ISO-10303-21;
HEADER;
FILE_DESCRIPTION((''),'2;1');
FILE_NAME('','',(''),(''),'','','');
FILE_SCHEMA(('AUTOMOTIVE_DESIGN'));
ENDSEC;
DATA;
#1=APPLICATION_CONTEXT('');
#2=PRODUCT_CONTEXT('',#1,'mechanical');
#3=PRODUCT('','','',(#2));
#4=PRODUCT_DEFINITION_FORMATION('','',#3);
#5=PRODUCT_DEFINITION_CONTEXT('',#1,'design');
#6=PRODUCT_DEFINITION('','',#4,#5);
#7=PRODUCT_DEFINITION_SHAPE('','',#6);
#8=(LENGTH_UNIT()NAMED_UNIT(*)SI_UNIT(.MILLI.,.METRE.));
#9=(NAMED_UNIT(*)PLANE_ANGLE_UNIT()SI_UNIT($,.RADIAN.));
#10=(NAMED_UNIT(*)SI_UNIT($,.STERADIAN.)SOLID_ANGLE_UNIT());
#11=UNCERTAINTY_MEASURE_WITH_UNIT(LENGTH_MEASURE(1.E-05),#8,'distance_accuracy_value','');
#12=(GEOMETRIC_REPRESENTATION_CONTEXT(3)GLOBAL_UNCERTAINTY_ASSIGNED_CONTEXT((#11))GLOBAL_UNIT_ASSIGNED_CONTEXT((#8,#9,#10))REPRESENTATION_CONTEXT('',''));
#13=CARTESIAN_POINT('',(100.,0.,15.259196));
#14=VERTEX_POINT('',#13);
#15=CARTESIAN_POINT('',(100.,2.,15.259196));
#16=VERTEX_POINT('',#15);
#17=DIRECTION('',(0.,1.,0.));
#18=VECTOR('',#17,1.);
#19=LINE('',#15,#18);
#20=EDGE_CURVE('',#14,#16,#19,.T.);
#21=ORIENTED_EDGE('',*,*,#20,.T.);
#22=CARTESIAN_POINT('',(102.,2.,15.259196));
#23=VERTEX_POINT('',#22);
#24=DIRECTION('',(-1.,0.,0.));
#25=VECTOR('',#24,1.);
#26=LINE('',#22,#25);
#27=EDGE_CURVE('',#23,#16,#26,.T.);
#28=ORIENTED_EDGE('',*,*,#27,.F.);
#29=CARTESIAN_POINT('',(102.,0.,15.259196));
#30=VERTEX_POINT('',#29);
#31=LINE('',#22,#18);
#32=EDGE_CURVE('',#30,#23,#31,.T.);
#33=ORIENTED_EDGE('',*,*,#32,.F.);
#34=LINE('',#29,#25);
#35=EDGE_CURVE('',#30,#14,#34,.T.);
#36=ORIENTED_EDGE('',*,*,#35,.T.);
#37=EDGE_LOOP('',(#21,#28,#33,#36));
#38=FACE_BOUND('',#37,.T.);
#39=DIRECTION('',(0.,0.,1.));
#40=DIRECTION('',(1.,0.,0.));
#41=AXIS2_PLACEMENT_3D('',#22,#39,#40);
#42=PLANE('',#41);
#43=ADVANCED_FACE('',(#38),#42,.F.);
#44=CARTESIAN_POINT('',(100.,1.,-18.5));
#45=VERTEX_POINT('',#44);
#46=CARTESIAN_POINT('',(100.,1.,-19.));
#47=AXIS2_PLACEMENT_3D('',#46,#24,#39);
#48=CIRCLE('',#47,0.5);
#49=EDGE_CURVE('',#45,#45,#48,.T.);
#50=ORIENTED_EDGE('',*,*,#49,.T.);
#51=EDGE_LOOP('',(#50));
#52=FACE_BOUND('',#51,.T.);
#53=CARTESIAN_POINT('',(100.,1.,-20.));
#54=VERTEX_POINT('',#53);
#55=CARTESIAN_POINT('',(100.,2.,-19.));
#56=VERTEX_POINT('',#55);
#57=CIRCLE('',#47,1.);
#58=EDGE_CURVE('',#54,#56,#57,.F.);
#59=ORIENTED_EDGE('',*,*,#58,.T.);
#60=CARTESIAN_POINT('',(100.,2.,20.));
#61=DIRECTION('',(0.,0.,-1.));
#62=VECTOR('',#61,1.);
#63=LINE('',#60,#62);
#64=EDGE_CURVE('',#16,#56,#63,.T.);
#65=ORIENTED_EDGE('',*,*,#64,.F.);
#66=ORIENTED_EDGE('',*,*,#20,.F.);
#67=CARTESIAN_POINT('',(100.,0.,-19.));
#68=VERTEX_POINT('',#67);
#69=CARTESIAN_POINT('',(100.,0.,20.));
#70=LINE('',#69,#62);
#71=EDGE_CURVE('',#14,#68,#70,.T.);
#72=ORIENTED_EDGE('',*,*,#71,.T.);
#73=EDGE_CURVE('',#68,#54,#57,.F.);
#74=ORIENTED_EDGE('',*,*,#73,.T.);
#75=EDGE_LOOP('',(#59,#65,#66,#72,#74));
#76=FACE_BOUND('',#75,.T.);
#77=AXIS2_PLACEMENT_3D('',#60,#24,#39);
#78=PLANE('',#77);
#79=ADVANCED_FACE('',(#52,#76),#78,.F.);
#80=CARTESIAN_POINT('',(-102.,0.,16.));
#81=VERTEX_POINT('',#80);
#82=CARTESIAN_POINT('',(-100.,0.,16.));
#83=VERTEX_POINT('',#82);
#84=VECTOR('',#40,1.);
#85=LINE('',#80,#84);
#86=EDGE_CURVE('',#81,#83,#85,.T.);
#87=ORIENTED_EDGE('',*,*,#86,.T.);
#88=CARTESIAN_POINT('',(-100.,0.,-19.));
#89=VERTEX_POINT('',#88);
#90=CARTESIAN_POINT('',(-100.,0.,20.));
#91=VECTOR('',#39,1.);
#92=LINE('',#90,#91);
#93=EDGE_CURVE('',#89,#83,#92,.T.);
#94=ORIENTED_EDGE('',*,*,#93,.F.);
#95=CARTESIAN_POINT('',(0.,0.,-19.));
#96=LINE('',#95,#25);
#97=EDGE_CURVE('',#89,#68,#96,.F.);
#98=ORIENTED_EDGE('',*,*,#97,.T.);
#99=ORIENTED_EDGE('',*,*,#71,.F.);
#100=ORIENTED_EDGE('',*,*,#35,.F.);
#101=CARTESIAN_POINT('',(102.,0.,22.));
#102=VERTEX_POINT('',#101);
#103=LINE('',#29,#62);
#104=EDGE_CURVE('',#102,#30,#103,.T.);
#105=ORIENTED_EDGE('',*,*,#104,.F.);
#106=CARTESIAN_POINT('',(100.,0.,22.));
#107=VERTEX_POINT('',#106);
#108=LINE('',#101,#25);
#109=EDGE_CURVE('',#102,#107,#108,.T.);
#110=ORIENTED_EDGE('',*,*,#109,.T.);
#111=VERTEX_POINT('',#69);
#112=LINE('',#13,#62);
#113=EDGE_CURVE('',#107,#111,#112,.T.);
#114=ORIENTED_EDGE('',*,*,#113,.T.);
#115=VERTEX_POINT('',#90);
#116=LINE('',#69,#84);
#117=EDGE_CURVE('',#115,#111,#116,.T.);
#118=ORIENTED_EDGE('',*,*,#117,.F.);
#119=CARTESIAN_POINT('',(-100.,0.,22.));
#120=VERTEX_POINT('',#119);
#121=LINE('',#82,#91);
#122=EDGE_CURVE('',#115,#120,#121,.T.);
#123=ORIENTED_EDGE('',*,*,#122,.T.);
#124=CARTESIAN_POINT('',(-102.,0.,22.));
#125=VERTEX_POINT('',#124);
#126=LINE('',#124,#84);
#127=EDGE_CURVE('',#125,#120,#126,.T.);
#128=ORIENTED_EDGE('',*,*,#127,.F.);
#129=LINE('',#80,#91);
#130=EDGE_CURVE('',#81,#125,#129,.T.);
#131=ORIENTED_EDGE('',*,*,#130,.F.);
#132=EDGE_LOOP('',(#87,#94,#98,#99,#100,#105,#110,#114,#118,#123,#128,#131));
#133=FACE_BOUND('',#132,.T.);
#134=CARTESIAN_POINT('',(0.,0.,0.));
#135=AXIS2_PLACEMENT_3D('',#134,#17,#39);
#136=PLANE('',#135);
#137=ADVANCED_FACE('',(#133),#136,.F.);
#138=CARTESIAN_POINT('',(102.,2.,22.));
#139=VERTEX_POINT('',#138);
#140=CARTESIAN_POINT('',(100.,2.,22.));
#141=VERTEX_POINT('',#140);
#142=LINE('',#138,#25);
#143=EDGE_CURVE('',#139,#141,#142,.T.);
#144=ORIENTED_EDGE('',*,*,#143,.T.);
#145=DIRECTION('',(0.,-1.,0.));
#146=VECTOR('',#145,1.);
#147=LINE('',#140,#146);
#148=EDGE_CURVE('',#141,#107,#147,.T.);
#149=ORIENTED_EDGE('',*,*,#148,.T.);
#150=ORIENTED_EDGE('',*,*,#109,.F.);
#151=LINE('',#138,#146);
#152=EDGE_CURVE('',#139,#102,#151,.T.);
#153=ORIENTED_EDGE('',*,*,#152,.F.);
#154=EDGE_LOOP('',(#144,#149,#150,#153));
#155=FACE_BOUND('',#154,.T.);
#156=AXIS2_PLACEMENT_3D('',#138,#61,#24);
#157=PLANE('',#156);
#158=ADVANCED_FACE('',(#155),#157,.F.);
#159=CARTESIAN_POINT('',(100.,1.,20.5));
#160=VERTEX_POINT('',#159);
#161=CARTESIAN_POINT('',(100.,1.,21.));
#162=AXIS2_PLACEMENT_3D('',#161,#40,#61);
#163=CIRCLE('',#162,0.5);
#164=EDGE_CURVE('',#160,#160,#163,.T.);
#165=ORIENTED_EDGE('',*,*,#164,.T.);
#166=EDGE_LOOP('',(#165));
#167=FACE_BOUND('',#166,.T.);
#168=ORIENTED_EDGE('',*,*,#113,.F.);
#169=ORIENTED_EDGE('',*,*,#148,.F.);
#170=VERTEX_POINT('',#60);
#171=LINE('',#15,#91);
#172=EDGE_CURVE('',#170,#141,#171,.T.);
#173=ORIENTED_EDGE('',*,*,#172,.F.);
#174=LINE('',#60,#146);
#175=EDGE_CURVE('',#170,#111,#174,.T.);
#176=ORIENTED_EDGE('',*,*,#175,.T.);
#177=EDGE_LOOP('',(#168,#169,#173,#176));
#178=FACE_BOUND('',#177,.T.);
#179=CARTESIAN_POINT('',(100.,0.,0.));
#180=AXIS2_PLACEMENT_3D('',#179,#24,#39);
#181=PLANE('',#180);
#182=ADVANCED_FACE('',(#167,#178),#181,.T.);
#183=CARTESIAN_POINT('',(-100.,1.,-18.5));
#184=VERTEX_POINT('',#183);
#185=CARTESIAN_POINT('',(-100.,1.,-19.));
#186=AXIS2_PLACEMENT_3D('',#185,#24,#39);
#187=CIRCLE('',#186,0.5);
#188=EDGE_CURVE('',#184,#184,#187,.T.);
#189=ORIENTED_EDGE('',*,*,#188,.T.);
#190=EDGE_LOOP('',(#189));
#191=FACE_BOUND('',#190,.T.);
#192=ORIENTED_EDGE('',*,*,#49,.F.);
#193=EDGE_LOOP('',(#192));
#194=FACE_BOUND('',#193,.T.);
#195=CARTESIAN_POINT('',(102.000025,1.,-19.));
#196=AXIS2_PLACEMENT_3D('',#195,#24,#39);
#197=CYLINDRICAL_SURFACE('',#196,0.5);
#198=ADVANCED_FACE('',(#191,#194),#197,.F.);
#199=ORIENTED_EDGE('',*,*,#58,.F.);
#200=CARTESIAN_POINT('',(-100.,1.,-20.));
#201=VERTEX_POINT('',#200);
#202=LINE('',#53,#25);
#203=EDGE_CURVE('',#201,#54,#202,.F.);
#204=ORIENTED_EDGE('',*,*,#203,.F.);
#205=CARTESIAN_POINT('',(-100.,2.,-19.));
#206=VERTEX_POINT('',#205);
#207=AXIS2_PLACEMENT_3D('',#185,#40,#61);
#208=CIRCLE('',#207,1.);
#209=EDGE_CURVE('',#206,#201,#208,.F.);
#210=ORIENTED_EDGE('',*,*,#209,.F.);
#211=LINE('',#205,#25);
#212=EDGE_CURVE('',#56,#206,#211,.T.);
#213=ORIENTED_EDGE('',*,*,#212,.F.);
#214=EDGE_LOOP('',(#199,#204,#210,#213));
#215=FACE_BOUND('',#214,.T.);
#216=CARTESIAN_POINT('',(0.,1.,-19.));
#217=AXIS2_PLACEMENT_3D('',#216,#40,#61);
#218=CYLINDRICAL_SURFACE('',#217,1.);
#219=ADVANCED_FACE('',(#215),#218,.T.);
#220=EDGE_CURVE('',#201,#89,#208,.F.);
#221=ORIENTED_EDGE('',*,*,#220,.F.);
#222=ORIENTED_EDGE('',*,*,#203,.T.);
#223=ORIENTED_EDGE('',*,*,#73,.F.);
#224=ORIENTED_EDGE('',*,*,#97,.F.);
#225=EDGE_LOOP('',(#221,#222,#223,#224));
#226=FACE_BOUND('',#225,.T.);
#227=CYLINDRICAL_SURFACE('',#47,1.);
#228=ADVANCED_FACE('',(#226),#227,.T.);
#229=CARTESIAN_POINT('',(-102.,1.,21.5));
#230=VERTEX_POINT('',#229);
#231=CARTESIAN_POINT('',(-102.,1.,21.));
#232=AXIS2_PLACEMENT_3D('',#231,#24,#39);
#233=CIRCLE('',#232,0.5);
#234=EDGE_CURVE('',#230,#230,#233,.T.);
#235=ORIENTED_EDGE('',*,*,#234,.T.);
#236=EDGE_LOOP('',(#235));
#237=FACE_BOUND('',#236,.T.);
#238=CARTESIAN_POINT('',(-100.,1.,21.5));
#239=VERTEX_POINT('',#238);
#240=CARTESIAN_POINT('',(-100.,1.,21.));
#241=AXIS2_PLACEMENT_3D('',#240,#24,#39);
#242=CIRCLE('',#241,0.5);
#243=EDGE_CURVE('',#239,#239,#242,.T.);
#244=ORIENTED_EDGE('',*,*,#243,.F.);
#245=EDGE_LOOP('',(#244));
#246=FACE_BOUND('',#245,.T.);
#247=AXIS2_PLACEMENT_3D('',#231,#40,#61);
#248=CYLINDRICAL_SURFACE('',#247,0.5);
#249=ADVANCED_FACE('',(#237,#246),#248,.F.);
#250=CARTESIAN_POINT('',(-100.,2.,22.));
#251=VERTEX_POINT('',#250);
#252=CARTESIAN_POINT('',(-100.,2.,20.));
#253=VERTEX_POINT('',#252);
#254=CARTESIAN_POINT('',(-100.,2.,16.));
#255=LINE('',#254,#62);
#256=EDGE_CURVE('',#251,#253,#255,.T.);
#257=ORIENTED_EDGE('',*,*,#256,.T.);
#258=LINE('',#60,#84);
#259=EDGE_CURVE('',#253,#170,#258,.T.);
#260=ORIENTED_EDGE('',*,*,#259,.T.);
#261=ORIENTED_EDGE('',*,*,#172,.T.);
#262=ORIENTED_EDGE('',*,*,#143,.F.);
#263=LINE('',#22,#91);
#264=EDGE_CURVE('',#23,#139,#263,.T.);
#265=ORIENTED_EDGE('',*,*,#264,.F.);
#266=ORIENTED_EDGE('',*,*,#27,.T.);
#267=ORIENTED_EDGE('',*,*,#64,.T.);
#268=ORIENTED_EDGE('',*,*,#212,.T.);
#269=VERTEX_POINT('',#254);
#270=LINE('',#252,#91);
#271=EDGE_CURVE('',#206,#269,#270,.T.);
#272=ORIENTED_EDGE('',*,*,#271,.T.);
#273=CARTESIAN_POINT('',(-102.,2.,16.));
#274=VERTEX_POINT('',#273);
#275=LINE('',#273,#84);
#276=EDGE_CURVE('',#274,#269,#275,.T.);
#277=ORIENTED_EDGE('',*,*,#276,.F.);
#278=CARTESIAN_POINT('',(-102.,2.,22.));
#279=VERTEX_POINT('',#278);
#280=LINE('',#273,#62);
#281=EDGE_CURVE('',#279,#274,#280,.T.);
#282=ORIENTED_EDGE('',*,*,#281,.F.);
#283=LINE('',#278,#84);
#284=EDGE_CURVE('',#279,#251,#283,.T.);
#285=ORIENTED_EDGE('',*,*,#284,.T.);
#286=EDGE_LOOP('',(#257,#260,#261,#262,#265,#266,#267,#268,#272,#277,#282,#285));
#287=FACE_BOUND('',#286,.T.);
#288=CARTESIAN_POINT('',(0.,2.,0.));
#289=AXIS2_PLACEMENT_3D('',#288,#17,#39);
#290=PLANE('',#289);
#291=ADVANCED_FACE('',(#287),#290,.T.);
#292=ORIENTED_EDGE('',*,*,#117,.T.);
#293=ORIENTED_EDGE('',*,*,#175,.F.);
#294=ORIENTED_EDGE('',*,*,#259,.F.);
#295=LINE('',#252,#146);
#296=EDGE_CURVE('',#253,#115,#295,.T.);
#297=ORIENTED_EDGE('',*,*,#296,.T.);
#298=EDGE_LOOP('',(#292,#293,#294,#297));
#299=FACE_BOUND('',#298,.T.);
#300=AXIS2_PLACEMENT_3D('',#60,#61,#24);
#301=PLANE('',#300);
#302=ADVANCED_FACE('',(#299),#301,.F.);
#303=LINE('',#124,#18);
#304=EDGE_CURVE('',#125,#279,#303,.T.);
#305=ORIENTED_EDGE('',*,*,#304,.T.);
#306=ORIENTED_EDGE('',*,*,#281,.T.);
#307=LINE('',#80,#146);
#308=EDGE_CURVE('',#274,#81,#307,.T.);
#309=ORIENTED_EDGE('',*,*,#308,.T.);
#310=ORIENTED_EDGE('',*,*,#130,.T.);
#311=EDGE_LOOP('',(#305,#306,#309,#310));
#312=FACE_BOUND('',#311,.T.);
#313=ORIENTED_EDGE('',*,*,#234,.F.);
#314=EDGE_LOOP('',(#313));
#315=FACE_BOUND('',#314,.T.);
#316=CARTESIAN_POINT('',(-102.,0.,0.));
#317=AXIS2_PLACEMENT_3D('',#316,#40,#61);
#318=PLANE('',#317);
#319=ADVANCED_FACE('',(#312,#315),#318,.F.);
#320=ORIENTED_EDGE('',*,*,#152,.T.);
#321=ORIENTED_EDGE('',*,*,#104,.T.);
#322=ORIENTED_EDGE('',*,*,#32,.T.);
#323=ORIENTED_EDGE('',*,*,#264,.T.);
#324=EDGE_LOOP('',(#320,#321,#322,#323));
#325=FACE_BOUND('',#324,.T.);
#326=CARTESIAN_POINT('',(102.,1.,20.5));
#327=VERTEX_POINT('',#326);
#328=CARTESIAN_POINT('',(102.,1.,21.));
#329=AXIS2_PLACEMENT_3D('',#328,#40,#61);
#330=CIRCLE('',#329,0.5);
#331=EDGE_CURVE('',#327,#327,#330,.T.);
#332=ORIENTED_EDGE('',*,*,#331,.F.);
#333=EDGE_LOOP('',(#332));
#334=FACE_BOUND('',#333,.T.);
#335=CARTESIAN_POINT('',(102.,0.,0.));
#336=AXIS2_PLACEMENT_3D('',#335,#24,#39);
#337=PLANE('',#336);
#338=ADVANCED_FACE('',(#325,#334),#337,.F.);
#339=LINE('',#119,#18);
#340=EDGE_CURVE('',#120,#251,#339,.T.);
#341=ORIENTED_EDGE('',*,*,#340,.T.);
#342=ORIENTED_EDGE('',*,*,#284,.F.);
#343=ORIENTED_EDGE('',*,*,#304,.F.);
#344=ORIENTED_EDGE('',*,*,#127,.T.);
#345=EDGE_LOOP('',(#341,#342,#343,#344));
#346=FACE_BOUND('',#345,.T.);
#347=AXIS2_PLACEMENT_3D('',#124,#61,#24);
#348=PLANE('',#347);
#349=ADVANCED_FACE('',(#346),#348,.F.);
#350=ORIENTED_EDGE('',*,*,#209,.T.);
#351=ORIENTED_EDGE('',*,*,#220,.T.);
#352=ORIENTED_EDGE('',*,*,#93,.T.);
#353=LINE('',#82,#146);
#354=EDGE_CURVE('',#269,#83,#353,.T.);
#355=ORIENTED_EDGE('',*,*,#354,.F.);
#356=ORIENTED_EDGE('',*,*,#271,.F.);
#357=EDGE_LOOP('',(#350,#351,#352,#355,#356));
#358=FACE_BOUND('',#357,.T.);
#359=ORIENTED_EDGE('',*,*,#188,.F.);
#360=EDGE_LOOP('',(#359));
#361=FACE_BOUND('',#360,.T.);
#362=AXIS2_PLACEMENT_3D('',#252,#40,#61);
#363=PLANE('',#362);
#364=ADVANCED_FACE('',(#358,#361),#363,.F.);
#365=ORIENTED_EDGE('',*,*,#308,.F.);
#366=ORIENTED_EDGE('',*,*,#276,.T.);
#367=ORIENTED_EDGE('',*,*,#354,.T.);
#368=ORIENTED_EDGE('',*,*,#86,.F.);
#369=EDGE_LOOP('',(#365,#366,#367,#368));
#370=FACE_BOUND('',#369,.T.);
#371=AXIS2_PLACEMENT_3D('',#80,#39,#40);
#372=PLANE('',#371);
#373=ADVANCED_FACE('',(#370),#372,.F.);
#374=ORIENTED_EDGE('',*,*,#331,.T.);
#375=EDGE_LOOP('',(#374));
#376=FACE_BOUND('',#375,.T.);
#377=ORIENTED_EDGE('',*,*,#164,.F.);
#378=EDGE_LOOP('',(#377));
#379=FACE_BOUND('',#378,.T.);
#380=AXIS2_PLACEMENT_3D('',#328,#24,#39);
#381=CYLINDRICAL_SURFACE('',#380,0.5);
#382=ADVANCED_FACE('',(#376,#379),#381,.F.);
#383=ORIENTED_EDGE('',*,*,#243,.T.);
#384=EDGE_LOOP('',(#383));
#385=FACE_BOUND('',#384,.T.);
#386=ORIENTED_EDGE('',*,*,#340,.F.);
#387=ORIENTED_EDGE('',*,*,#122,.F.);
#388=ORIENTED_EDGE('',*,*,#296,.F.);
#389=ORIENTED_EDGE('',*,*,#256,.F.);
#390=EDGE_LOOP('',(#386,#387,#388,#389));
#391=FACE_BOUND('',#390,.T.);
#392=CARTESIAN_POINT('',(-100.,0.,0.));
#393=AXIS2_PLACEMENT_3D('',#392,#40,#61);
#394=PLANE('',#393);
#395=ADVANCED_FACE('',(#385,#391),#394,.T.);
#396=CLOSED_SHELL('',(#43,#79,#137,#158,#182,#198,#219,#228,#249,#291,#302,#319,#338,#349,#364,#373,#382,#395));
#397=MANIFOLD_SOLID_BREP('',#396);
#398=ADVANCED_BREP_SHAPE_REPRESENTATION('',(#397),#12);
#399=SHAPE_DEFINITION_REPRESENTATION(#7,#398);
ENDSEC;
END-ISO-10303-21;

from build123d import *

# Parameters (mm, degrees)
SKETCH1_W           = 200
SKETCH1_H           = 40
BOSS_EXTRUDE1_DEPTH = 2
SKETCH2_W           = 6.740804159
SKETCH2_H           = 2
SKETCH2_R           = 0.5
BOSS_EXTRUDE2_DEPTH = 2
BOSS_EXTRUDE3_START = 2
SKETCH3_W           = 6
SKETCH3_H           = 2
SKETCH3_R           = 0.5
BOSS_EXTRUDE3_DEPTH = 2
SKETCH4_R           = 0.5
CUT_EXTRUDE1_DEPTH  = 204.204330663
FILLET2_R           = 1


with BuildPart() as part:
    # Sketch1 → Boss-Extrude1 (new body)
    with BuildSketch(Plane(origin=(0, 0, 0), x_dir=(1, 0, 0), z_dir=(0, 1, 0))):
        Rectangle(SKETCH1_W, SKETCH1_H)
    extrude(amount=BOSS_EXTRUDE1_DEPTH)

    # Sketch2 → Boss-Extrude2 (add)
    with BuildSketch(Plane(origin=(100, 0, 0), x_dir=(0, 0, -1), z_dir=(1, 0, 0))):
        with Locations((-18.629597921, 1)):
            Rectangle(SKETCH2_W, SKETCH2_H)
        with Locations((-21, 1)):
            Circle(SKETCH2_R, mode=Mode.SUBTRACT)
    extrude(amount=BOSS_EXTRUDE2_DEPTH)

    # Sketch3 → Boss-Extrude3 (add)
    with BuildSketch(Plane.ZY.offset(100).offset(BOSS_EXTRUDE3_START)):
        with Locations((19, 1)):
            Rectangle(SKETCH3_W, SKETCH3_H)
        with Locations(Location((21, 1, 0), (0, 0, 180))):
            Circle(SKETCH3_R, mode=Mode.SUBTRACT)
    extrude(amount=-BOSS_EXTRUDE3_DEPTH)

    # Sketch4 → Cut-Extrude1 (cut, through all)
    with BuildSketch(Plane.ZY.offset(100)):
        with Locations((-19, 1)):
            Circle(SKETCH4_R)
    extrude(amount=-CUT_EXTRUDE1_DEPTH, mode=Mode.SUBTRACT)

    # Fillet2
    fillet2_edges = [part.edges().sort_by_distance(p)[0] for p in [
        (0, 0, -20),
        (0, 2, -20),
    ]]
    fillet(fillet2_edges, radius=FILLET2_R - 0.0001)  # a hair under: the kernel refuses the full size


solid = part.part
